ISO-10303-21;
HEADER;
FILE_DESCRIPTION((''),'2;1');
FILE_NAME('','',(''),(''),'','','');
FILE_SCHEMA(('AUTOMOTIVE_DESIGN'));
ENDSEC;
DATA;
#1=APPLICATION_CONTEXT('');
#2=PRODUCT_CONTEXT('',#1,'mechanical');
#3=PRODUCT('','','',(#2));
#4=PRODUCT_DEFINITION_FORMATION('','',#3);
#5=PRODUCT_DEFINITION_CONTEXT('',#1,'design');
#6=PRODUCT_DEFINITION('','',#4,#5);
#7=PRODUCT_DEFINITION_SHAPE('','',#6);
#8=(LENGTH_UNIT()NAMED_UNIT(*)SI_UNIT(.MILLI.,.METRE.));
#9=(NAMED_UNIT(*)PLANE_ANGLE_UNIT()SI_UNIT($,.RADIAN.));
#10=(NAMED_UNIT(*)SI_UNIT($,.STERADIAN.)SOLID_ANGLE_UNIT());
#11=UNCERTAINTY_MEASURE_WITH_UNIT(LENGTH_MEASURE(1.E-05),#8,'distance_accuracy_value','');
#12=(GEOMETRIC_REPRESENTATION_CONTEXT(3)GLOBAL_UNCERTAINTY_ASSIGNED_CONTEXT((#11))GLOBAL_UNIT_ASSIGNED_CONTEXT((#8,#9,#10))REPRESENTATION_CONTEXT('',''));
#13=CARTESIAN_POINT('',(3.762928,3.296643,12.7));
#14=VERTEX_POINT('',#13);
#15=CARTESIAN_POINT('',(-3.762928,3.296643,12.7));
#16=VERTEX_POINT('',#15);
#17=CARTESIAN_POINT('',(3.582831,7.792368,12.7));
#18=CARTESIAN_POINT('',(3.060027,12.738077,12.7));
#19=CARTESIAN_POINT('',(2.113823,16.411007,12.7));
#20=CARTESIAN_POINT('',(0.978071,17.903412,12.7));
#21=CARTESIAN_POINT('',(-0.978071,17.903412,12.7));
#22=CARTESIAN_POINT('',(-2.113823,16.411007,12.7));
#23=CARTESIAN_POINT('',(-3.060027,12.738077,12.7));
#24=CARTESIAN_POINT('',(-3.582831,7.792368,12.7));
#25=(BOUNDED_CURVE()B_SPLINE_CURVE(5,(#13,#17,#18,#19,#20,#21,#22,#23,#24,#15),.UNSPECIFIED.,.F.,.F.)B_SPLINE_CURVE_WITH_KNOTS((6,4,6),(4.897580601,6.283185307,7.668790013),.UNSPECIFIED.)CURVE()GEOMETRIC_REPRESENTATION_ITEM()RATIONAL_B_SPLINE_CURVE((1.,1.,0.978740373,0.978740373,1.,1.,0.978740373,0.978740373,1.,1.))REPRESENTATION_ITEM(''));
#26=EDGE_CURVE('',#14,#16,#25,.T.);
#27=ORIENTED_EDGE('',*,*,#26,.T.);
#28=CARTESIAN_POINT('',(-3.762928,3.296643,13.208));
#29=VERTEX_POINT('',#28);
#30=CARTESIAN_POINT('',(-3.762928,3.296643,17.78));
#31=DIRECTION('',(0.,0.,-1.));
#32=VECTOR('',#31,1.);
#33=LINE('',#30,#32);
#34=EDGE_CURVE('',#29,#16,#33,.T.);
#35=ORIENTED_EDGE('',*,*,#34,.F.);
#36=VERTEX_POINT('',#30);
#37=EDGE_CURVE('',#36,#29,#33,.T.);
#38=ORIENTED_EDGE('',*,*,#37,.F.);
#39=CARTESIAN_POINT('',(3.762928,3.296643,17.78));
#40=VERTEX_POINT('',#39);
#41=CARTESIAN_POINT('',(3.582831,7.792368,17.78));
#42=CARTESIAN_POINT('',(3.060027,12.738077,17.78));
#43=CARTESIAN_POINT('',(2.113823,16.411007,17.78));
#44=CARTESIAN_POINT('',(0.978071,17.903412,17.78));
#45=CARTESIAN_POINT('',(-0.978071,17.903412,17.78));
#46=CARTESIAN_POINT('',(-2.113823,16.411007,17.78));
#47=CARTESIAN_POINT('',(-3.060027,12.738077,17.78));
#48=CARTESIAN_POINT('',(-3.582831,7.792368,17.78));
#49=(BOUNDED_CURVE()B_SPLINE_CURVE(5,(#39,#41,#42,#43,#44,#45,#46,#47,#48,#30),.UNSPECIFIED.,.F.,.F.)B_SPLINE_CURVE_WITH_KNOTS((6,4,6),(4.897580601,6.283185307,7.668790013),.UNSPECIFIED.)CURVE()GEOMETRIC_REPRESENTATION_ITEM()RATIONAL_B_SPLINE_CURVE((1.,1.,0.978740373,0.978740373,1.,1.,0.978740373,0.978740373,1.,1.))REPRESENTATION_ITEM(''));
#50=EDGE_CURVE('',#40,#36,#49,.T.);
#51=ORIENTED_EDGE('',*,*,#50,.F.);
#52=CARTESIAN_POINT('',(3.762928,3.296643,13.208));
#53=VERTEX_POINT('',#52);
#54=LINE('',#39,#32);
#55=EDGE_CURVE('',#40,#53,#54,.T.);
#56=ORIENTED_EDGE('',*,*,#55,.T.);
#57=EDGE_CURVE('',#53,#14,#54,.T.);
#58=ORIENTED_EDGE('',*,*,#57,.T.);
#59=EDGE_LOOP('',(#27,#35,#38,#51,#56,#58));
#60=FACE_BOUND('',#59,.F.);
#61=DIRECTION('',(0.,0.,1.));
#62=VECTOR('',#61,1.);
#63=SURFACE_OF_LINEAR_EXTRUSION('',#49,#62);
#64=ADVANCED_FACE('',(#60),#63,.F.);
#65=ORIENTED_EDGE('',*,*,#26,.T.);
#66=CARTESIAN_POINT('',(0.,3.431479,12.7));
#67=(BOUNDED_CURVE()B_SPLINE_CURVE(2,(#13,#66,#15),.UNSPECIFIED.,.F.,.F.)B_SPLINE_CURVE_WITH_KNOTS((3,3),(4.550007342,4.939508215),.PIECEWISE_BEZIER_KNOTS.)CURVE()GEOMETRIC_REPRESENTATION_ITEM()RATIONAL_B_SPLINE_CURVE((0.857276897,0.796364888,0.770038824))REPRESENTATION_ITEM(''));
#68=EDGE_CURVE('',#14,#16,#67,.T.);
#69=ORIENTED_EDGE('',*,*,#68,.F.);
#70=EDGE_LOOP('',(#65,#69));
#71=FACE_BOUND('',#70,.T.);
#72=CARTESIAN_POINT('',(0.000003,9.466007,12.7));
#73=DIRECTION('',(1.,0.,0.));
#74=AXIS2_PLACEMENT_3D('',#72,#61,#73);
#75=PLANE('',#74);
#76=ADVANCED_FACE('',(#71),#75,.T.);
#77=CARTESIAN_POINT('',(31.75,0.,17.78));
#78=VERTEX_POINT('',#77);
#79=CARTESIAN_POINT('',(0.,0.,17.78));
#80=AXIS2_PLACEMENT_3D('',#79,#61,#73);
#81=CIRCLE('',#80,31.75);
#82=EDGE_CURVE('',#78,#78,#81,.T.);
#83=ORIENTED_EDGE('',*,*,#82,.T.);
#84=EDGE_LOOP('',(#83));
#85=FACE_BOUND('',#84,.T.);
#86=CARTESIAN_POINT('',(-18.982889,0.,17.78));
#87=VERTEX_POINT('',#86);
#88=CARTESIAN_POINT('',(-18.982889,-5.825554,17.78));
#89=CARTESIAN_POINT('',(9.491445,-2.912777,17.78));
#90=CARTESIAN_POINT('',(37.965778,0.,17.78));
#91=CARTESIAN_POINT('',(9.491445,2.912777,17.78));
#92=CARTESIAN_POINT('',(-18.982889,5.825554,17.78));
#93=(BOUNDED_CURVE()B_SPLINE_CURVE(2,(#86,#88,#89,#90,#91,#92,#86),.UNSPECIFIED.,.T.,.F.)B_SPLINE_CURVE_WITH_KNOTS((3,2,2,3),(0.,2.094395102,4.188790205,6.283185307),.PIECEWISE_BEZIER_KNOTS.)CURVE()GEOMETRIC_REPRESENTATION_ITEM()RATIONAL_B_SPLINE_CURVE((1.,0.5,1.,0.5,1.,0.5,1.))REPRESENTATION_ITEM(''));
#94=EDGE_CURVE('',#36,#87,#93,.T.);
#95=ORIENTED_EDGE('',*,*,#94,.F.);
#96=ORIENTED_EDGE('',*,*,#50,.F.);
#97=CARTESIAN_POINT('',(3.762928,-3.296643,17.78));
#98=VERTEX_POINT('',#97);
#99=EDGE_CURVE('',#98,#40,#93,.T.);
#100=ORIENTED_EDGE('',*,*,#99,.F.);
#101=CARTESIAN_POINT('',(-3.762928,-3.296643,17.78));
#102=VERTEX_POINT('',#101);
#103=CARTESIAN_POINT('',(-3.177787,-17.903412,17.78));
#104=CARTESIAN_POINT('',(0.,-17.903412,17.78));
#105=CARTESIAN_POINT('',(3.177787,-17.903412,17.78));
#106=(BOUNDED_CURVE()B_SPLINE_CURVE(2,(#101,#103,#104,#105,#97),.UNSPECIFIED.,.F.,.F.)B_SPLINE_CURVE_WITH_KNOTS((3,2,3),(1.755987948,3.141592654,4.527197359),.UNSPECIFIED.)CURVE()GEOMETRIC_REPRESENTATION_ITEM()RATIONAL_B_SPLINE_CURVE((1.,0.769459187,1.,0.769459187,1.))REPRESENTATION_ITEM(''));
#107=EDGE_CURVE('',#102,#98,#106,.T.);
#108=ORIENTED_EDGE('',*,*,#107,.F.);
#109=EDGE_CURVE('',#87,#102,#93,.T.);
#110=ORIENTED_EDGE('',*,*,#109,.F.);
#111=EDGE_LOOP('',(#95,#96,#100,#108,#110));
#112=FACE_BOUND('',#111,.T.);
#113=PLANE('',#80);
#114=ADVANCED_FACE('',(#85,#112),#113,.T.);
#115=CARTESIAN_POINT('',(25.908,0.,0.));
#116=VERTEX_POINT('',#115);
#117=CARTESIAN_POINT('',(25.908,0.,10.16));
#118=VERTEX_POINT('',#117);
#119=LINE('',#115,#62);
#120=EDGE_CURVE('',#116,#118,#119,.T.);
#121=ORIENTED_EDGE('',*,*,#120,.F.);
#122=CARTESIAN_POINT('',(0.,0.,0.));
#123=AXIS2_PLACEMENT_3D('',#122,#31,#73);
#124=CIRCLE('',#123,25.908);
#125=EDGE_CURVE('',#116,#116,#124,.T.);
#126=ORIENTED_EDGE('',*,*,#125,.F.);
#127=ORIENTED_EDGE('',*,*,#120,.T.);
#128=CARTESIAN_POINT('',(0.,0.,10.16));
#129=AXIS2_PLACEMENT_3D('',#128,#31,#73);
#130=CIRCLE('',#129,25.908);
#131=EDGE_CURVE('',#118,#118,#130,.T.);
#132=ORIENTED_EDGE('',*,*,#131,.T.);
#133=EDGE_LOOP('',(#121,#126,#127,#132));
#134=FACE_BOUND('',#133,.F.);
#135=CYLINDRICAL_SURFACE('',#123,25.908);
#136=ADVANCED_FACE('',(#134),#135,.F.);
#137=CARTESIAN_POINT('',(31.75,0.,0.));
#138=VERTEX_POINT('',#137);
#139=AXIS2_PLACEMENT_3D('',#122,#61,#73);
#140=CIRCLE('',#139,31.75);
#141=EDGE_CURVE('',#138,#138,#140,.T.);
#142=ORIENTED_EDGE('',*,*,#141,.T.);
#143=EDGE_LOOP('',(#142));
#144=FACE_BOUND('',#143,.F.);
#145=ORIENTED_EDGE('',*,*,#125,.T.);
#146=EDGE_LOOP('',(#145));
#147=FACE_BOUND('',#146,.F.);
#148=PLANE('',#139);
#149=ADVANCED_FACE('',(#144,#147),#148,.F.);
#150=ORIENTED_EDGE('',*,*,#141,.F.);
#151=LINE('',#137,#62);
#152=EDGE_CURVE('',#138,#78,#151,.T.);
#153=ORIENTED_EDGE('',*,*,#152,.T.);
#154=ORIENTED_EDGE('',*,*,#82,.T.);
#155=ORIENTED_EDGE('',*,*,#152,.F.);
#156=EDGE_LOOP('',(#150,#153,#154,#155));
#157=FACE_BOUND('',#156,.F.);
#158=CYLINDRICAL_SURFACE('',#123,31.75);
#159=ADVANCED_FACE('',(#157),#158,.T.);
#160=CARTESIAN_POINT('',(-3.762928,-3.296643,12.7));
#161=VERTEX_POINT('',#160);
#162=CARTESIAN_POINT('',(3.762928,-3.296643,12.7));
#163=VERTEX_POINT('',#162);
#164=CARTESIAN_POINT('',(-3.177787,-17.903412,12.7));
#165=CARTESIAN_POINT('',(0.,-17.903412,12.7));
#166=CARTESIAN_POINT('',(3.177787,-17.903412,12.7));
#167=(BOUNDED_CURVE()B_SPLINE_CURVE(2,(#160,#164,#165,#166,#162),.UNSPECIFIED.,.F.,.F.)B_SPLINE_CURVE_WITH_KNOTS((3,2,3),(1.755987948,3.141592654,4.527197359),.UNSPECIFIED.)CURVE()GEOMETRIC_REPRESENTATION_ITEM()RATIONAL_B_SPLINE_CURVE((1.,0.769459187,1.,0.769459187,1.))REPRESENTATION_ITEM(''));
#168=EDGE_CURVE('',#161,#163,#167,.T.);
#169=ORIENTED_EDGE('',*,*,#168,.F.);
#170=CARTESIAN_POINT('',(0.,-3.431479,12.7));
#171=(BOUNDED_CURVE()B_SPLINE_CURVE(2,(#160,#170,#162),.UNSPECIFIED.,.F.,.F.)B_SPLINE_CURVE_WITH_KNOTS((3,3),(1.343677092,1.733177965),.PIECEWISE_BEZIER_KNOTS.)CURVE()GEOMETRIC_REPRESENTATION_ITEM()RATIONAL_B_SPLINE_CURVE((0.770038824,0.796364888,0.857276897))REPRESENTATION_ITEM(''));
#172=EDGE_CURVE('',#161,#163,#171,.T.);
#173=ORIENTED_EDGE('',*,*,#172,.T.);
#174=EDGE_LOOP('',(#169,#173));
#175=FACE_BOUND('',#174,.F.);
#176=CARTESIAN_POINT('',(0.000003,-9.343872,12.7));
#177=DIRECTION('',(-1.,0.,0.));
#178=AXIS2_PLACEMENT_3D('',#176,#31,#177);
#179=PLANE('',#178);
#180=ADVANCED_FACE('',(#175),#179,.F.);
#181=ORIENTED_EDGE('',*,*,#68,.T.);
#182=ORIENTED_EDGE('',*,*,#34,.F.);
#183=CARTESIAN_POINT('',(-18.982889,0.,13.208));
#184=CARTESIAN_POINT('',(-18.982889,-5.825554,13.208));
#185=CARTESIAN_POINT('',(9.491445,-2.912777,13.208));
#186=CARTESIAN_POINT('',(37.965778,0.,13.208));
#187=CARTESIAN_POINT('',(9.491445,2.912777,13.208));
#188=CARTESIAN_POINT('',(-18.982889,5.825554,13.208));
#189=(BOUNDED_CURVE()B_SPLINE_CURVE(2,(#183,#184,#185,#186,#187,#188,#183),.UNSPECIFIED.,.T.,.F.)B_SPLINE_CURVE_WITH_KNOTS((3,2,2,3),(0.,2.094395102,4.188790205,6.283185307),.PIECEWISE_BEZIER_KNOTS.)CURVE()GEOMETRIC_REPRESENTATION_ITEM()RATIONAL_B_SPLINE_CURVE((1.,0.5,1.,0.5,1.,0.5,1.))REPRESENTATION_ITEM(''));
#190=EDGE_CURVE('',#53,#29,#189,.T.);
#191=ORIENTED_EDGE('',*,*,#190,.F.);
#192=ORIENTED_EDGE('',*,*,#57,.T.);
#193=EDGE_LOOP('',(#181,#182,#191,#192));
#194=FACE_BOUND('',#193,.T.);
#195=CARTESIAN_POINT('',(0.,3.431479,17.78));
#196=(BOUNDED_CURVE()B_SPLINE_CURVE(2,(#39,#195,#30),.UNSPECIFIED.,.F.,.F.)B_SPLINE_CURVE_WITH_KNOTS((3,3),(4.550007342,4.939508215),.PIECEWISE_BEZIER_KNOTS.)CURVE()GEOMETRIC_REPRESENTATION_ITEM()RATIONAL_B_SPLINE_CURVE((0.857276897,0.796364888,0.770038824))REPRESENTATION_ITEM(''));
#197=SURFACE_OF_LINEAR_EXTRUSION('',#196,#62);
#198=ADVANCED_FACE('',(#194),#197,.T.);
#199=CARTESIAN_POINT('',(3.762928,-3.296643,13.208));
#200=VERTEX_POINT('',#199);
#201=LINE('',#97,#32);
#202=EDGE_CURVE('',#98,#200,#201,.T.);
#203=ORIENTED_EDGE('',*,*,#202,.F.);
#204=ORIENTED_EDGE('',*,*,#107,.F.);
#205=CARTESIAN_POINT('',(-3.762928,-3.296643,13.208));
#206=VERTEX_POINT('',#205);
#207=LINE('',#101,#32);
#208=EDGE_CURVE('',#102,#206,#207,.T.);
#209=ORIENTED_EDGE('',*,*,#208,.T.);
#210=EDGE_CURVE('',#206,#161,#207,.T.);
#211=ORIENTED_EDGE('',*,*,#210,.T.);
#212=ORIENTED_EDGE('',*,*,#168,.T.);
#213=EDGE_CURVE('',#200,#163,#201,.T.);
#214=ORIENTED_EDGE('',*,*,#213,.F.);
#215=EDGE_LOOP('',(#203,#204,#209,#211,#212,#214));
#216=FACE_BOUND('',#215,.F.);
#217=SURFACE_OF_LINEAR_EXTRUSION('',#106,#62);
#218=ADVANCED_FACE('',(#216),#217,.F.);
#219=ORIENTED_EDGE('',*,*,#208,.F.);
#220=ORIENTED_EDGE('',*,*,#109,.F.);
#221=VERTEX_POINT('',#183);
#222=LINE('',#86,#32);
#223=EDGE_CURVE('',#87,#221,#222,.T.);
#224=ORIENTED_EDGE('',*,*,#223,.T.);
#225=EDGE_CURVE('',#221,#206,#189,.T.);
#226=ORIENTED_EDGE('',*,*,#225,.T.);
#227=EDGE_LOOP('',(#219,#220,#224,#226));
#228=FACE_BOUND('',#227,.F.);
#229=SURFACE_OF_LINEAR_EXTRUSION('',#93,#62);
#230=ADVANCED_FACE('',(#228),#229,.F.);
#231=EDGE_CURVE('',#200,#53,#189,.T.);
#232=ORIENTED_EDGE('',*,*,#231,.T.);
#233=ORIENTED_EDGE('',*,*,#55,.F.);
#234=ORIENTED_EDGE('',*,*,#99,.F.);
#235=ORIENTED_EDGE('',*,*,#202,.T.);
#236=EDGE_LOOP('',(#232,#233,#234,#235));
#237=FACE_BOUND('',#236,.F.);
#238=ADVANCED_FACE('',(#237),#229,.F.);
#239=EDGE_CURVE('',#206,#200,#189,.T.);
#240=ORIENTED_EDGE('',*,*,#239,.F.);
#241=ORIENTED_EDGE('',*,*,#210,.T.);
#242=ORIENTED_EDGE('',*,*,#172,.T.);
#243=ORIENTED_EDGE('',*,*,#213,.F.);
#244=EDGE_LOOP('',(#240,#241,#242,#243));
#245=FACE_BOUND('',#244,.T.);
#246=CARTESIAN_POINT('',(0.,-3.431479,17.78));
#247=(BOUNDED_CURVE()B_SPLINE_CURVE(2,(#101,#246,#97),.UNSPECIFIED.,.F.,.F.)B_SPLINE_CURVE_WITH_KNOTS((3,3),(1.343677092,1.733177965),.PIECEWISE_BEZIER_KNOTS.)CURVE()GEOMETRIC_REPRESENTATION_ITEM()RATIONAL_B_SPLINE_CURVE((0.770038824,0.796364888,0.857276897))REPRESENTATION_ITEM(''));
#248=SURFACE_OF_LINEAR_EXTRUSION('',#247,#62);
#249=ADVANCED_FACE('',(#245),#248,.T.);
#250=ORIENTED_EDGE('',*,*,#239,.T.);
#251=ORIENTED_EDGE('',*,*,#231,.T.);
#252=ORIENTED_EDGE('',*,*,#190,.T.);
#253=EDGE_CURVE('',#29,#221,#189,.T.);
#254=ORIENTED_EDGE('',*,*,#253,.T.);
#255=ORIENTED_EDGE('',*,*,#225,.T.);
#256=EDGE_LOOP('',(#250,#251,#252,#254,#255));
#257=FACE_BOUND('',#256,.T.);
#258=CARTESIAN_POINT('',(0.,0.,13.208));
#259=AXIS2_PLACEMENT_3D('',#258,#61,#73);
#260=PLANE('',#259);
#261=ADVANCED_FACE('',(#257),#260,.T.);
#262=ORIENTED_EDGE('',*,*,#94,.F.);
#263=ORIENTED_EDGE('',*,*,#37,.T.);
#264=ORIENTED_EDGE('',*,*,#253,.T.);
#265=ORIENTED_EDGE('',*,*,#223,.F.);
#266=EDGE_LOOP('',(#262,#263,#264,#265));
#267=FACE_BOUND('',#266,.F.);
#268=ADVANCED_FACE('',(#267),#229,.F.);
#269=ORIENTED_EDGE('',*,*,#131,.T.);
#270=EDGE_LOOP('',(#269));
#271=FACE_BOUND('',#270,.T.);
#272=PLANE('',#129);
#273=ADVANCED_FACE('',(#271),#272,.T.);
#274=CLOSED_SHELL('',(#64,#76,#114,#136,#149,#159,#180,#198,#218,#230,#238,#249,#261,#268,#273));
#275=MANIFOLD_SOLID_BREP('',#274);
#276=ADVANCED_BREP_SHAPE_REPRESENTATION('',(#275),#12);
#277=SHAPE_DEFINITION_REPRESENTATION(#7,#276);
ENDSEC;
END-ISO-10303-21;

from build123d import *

# Parameters (mm, degrees)
F0_R     = 31.75
F1_DEPTH = 17.78
F2_R     = 25.908
F3_DEPTH = 10.16
F5_DEPTH = 4.572
F7_DEPTH = 5.08


with BuildPart() as f1:
    # F0 (on Top) → F1 (new body)
    with BuildSketch(Plane.XY):
        Circle(F0_R)
    extrude(amount=F1_DEPTH)

    # F2 (on face) → F3 (cut)
    with BuildSketch(Plane(origin=(0, 0, 0), x_dir=(1, 0, 0), z_dir=(0, 0, -1))):
        Circle(F2_R)
    extrude(amount=-F3_DEPTH, mode=Mode.SUBTRACT)

    # F4 (on face) → F5 (cut)
    with BuildSketch(Plane.XY.offset(17.78)):
        with BuildLine():
            add(Edge.make_bspline(
                [(-18.9828891307, 0), (-18.9828891307, -5.8255543832), (9.4914445654, -2.9127771916), (37.9657782614, 0), (9.4914445654, 2.9127771916), (-18.9828891307, 5.8255543832), (-18.9828891307, 0)],
                knots=[0, 0, 0, 2.0943951024, 2.0943951024, 4.1887902048, 4.1887902048, 6.2831853072, 6.2831853072, 6.2831853072], degree=2, weights=[1, 0.5, 1, 0.5, 1, 0.5, 1]))
        make_face()
    extrude(amount=-F5_DEPTH, mode=Mode.SUBTRACT)

    # F6 (on face) → F7 (cut)
    with BuildSketch(Plane.XY.offset(17.78)):
        with BuildLine():
            add(Edge.make_bspline(
                [(3.7629278729, 3.2966425981), (3.177786528, 17.9034117609), (0, 17.9034117609)],
                knots=[4.8975806012, 4.8975806012, 4.8975806012, 6.2831853072, 6.2831853072, 6.2831853072], degree=2, weights=[1, 0.7694591871, 1]))
            add(Edge.make_bspline(
                [(0, 17.9034117609), (-3.177786528, 17.9034117609), (-3.7629278729, 3.2966425981)],
                knots=[0, 0, 0, 1.385604706, 1.385604706, 1.385604706], degree=2, weights=[1, 0.7694591871, 1]))
            add(Edge.make_bspline(
                [(3.7629278729, 3.2966425981), (0, 3.4314794382), (-3.7629278729, 3.2966425981)],
                knots=[4.5500073421, 4.5500073421, 4.5500073421, 4.9395082154, 4.9395082154, 4.9395082154], degree=2, weights=[0.8572768974, 0.7963648883, 0.770038824]))
        make_face()
        with BuildLine():
            add(Edge.make_bspline(
                [(-3.7629278729, -3.2966425981), (0, -3.4314794382), (3.7629278729, -3.2966425981)],
                knots=[1.3436770918, 1.3436770918, 1.3436770918, 1.7331779651, 1.7331779651, 1.7331779651], degree=2, weights=[0.770038824, 0.7963648883, 0.8572768974]))
            add(Edge.make_bspline(
                [(-3.7629278729, -3.2966425981), (-3.177786528, -17.9034117609), (0, -17.9034117609), (3.177786528, -17.9034117609), (3.7629278729, -3.2966425981)],
                knots=[1.7559879476, 1.7559879476, 1.7559879476, 3.1415926536, 3.1415926536, 4.5271973595, 4.5271973595, 4.5271973595], degree=2, weights=[1, 0.7694591871, 1, 0.7694591871, 1]))
        make_face()
    extrude(amount=-F7_DEPTH, mode=Mode.SUBTRACT)


solid = f1.part
